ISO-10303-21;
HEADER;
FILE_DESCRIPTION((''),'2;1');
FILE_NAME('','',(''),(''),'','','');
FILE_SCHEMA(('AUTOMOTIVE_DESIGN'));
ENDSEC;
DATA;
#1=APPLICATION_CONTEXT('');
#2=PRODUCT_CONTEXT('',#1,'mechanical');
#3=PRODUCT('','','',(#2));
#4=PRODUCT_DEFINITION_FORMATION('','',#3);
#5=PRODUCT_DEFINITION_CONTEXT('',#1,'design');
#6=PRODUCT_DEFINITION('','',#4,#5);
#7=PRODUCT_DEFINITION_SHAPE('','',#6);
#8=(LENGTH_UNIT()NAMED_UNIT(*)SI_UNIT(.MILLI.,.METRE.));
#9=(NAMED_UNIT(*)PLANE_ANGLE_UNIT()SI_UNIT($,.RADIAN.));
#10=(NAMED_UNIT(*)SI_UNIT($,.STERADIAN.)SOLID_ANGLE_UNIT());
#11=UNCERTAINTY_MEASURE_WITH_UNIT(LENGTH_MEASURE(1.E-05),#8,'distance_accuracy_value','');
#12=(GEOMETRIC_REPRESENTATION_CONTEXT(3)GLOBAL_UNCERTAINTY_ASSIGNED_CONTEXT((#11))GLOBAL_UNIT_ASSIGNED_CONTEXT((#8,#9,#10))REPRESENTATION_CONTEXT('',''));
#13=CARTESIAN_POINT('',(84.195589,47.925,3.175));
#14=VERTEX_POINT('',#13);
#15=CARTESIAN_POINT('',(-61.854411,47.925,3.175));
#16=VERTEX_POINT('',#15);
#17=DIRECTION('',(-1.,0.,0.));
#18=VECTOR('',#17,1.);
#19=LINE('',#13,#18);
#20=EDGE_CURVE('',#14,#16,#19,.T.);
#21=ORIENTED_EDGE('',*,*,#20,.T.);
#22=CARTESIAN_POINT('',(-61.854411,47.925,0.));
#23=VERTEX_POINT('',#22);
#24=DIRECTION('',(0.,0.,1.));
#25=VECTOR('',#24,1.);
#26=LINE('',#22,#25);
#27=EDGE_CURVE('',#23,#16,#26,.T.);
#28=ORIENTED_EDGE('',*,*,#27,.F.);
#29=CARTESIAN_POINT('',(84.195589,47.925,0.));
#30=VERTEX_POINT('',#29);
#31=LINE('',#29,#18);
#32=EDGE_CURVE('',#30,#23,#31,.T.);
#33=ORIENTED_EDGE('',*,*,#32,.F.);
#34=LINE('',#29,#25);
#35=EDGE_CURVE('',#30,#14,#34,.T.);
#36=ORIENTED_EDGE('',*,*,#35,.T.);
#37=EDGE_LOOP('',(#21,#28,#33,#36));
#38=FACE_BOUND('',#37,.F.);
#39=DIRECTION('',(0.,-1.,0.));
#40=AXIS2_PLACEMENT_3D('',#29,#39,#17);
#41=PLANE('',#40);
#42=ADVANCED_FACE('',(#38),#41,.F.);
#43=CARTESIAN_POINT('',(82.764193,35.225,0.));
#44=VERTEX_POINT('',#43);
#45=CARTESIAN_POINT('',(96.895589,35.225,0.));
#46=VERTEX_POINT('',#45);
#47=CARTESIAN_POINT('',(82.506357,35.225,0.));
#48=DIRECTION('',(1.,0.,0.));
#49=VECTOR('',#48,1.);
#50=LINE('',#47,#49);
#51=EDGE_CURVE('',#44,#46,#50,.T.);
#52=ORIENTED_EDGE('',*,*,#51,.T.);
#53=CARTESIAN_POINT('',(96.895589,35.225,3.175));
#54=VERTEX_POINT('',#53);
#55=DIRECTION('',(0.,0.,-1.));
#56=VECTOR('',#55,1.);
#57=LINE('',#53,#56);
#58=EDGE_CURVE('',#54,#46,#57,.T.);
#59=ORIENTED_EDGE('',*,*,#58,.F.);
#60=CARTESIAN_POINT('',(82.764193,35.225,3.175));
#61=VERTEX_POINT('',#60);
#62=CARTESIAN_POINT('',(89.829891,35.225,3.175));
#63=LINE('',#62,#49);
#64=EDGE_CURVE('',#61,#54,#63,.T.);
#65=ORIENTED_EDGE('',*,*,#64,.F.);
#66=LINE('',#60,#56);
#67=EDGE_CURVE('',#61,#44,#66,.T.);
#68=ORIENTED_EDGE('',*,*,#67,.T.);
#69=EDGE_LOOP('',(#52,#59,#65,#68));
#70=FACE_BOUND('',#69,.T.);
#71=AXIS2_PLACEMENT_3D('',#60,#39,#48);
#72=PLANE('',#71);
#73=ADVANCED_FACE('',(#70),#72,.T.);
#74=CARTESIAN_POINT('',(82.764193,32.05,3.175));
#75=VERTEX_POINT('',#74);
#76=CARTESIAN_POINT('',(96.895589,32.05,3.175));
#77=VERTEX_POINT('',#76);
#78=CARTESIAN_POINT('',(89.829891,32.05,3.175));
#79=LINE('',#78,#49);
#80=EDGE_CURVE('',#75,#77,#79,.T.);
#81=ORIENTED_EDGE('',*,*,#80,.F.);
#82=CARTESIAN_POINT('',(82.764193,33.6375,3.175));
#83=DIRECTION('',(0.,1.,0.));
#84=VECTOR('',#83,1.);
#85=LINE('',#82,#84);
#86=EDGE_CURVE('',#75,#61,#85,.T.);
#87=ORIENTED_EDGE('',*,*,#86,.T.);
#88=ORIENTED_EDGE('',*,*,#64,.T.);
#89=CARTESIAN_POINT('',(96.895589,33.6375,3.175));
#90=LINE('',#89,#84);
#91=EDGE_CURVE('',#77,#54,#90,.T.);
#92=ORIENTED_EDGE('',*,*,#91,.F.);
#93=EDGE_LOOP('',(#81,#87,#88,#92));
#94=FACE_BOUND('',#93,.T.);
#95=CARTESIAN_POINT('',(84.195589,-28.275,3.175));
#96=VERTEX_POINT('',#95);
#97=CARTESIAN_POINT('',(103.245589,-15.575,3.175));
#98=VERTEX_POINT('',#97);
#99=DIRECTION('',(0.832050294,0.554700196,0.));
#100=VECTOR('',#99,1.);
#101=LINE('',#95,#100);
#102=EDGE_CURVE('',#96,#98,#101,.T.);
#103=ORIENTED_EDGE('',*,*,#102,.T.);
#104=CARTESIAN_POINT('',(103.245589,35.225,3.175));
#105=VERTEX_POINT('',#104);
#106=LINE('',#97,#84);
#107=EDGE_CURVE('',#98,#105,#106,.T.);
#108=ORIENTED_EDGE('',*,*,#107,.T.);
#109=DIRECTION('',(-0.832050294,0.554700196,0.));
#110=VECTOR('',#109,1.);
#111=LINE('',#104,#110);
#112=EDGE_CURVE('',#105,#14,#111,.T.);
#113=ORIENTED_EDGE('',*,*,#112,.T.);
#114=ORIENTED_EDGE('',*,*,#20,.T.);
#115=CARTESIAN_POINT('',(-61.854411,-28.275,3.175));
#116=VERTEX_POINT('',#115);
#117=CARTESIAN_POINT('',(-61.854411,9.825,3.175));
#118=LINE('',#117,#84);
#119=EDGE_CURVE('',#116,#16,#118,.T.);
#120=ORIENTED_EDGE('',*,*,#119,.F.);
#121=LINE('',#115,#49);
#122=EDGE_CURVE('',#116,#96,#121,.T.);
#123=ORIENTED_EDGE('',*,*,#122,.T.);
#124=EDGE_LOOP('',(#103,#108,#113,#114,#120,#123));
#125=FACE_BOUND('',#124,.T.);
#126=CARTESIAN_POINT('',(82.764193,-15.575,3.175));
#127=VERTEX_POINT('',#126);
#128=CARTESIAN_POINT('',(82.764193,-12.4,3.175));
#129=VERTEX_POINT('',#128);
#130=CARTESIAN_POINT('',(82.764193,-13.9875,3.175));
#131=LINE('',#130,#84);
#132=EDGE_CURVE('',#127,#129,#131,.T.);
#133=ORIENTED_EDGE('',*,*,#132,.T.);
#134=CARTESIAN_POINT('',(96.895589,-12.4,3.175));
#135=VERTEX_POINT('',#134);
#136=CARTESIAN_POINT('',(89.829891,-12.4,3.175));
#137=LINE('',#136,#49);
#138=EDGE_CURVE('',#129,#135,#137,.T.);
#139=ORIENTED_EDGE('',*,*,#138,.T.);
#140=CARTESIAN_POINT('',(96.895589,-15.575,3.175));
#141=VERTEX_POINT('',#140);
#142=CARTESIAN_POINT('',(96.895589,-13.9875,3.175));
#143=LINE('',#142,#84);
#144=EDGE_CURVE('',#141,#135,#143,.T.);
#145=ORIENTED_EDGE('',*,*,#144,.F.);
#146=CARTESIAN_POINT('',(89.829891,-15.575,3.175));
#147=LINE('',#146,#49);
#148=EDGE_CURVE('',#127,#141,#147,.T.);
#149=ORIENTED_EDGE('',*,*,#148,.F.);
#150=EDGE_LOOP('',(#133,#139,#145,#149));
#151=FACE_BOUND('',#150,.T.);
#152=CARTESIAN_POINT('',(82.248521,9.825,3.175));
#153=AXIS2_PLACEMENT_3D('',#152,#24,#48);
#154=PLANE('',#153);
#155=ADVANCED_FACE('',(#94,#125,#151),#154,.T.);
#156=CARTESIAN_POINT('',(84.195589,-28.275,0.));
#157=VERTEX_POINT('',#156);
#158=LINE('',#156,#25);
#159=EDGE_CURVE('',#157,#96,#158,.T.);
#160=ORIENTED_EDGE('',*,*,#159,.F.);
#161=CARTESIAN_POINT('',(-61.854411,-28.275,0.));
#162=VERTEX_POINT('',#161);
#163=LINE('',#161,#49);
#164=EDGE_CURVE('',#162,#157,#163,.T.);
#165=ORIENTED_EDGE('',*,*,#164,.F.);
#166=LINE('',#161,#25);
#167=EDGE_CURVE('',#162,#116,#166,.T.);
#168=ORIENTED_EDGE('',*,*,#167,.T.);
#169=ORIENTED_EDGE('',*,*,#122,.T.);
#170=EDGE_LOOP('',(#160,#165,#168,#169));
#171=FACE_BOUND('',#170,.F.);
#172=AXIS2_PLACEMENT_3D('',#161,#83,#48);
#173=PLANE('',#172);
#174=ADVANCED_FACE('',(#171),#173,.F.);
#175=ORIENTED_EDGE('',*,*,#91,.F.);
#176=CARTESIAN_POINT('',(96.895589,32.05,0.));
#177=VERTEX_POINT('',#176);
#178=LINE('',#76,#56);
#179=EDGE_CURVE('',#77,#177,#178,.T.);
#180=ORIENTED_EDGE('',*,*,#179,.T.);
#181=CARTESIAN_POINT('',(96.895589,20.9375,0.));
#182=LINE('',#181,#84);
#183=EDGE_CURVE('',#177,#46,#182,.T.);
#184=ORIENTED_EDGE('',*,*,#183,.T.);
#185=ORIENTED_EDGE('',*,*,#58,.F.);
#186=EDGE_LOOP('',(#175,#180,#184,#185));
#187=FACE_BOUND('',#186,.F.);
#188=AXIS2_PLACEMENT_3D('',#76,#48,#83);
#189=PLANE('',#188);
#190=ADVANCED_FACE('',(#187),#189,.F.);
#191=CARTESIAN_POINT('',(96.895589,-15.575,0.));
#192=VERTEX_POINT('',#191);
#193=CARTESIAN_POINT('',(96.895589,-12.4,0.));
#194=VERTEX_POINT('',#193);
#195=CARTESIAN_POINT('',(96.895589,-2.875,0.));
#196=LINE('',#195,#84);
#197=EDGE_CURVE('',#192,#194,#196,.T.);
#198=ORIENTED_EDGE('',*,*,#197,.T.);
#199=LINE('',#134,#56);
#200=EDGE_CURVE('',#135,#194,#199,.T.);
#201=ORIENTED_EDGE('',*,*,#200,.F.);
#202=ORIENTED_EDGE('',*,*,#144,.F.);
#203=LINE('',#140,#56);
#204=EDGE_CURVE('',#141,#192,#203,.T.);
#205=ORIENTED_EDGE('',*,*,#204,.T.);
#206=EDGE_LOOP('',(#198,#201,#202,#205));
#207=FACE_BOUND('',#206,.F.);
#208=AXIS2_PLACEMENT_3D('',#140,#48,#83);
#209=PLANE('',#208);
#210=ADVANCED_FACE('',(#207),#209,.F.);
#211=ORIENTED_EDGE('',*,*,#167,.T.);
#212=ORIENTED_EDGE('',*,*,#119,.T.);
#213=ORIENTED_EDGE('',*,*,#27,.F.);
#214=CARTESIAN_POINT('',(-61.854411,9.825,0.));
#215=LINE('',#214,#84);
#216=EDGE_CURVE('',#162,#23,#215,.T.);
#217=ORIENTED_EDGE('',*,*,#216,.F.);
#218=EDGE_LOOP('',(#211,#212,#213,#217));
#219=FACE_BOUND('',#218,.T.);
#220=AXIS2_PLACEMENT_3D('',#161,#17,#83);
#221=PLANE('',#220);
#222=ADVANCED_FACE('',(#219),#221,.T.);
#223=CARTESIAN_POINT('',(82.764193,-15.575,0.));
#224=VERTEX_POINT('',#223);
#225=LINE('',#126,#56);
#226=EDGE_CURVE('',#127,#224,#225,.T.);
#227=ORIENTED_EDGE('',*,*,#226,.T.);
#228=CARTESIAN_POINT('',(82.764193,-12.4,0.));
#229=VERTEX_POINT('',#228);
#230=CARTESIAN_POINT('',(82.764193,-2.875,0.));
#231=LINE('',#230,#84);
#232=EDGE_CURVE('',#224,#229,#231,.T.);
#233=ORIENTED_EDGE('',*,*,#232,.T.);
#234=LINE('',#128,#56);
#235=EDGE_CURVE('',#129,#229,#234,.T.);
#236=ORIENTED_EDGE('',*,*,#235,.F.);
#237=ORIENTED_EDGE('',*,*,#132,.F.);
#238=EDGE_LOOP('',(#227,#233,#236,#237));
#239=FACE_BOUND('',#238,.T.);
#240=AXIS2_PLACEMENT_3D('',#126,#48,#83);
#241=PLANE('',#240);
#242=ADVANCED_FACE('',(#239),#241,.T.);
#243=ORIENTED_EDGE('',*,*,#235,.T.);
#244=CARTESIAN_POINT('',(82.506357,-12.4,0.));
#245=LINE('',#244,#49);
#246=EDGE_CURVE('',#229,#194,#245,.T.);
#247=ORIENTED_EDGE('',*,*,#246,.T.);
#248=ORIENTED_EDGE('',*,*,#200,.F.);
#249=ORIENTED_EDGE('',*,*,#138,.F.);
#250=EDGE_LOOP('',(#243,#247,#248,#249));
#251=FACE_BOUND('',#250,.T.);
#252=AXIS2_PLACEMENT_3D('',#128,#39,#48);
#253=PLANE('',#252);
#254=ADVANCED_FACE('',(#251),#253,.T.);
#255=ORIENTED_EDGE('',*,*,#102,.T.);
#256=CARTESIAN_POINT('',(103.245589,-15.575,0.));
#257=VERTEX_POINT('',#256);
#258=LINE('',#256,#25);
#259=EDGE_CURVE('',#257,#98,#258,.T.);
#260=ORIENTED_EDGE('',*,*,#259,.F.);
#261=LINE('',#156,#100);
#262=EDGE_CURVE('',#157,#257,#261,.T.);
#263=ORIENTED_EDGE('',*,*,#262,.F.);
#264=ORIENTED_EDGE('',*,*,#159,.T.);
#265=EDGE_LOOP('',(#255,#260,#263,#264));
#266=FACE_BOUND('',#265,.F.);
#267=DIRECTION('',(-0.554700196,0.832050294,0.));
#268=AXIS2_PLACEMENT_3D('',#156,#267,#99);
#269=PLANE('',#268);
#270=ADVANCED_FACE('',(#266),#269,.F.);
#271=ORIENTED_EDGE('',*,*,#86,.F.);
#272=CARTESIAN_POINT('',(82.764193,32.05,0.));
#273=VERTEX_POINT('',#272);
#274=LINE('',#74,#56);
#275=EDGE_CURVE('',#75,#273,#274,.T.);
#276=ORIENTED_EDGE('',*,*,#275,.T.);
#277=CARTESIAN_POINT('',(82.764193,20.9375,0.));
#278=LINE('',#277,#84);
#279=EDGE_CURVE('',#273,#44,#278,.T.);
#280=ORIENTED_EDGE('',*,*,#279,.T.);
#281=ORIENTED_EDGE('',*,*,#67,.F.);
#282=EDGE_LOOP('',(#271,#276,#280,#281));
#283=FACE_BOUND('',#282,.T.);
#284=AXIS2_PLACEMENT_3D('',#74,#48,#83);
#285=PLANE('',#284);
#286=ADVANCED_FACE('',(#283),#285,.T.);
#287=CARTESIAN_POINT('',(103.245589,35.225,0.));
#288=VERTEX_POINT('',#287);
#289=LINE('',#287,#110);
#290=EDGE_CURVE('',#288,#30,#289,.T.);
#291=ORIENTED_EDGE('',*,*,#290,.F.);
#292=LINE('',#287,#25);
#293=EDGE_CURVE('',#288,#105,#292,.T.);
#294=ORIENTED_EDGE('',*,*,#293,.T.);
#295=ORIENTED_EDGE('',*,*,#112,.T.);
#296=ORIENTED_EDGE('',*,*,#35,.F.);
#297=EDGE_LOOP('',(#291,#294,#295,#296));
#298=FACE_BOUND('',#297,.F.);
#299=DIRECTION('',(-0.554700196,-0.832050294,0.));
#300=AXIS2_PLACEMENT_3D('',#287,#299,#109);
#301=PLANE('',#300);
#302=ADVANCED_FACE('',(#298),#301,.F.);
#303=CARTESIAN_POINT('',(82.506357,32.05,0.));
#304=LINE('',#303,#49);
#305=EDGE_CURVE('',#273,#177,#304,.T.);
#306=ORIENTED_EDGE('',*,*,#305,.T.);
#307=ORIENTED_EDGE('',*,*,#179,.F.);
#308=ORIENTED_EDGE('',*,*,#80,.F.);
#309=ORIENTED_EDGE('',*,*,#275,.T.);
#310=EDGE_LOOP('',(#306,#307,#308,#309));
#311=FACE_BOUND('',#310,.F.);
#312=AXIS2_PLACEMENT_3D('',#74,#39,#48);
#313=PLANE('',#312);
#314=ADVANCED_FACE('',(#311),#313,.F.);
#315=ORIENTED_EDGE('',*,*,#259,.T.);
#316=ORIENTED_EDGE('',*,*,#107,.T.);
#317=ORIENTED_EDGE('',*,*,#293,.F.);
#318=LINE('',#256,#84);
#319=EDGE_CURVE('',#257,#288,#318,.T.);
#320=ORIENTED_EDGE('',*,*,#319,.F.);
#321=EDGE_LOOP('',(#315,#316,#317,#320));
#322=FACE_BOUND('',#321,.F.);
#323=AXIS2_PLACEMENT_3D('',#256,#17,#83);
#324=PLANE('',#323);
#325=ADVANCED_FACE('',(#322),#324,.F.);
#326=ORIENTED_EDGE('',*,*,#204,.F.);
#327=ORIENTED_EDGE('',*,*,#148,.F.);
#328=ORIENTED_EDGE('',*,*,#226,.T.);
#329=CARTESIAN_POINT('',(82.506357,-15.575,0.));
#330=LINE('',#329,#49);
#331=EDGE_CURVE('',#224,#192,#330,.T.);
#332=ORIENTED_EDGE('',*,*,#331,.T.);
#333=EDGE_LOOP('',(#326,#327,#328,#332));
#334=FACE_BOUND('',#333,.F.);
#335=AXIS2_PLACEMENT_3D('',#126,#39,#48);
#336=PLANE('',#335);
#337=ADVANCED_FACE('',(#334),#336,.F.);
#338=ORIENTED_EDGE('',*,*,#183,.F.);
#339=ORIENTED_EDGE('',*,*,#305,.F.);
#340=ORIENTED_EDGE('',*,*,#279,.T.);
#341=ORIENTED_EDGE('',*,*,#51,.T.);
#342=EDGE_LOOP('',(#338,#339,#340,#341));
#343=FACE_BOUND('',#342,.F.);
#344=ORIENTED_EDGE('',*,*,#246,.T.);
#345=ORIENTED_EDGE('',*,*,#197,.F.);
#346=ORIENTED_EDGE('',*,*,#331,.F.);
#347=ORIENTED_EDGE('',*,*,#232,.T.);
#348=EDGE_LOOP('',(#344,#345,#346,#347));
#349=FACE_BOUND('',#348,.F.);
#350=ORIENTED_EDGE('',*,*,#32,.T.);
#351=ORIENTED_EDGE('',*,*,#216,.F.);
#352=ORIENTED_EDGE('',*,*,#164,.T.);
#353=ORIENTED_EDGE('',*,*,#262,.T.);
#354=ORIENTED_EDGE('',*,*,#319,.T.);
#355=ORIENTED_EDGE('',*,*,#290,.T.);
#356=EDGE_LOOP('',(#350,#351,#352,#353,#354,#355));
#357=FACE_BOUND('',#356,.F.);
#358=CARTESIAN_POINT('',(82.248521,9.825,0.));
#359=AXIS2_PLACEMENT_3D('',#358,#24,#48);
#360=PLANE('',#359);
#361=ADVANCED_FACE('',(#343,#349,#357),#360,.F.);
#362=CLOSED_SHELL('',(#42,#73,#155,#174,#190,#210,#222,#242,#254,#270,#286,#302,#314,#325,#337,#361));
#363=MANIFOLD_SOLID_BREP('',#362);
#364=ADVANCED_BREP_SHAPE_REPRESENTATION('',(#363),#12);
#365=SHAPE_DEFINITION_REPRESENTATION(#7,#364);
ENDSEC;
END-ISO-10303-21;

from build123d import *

# Parameters (mm, degrees)
F0_W     = 127
F0_H     = 76.2
F1_DEPTH = 3.175
F2_W     = 14.131395125
F2_H     = 3.175
F3_DEPTH = 25.4


# Not quite as in the source:
# - a length typed as a fraction of an inch, garbled in the dataset ("3 / 203.2 mm" for 3/8 in), is restored


with BuildPart() as f1:
    # F0 (on Top) → F1 (new body)
    with BuildSketch(Plane.XY):
        Polygon((84.1955885406, 47.9249996081), (65.1455885406, 47.9249996081), (65.1455885406, -28.2750003919), (84.1955885406, -28.2750003919), (103.2455885406, -15.5750003919), (103.2455885406, 35.2249996081), align=None)
        with Locations((1.6455885406, 9.8249996081)):
            Rectangle(F0_W, F0_H)
    extrude(amount=F1_DEPTH)

    # F2 (on face) → F3 (cut)
    with BuildSketch(Plane.XY.offset(3.175)):
        with Locations((89.8298909781, 33.6374996081)):
            Rectangle(F2_W, F2_H)
        with Locations((89.8298909781, -13.9875003919)):
            Rectangle(F2_W, F2_H)
    extrude(amount=-F3_DEPTH, mode=Mode.SUBTRACT)


solid = f1.part
